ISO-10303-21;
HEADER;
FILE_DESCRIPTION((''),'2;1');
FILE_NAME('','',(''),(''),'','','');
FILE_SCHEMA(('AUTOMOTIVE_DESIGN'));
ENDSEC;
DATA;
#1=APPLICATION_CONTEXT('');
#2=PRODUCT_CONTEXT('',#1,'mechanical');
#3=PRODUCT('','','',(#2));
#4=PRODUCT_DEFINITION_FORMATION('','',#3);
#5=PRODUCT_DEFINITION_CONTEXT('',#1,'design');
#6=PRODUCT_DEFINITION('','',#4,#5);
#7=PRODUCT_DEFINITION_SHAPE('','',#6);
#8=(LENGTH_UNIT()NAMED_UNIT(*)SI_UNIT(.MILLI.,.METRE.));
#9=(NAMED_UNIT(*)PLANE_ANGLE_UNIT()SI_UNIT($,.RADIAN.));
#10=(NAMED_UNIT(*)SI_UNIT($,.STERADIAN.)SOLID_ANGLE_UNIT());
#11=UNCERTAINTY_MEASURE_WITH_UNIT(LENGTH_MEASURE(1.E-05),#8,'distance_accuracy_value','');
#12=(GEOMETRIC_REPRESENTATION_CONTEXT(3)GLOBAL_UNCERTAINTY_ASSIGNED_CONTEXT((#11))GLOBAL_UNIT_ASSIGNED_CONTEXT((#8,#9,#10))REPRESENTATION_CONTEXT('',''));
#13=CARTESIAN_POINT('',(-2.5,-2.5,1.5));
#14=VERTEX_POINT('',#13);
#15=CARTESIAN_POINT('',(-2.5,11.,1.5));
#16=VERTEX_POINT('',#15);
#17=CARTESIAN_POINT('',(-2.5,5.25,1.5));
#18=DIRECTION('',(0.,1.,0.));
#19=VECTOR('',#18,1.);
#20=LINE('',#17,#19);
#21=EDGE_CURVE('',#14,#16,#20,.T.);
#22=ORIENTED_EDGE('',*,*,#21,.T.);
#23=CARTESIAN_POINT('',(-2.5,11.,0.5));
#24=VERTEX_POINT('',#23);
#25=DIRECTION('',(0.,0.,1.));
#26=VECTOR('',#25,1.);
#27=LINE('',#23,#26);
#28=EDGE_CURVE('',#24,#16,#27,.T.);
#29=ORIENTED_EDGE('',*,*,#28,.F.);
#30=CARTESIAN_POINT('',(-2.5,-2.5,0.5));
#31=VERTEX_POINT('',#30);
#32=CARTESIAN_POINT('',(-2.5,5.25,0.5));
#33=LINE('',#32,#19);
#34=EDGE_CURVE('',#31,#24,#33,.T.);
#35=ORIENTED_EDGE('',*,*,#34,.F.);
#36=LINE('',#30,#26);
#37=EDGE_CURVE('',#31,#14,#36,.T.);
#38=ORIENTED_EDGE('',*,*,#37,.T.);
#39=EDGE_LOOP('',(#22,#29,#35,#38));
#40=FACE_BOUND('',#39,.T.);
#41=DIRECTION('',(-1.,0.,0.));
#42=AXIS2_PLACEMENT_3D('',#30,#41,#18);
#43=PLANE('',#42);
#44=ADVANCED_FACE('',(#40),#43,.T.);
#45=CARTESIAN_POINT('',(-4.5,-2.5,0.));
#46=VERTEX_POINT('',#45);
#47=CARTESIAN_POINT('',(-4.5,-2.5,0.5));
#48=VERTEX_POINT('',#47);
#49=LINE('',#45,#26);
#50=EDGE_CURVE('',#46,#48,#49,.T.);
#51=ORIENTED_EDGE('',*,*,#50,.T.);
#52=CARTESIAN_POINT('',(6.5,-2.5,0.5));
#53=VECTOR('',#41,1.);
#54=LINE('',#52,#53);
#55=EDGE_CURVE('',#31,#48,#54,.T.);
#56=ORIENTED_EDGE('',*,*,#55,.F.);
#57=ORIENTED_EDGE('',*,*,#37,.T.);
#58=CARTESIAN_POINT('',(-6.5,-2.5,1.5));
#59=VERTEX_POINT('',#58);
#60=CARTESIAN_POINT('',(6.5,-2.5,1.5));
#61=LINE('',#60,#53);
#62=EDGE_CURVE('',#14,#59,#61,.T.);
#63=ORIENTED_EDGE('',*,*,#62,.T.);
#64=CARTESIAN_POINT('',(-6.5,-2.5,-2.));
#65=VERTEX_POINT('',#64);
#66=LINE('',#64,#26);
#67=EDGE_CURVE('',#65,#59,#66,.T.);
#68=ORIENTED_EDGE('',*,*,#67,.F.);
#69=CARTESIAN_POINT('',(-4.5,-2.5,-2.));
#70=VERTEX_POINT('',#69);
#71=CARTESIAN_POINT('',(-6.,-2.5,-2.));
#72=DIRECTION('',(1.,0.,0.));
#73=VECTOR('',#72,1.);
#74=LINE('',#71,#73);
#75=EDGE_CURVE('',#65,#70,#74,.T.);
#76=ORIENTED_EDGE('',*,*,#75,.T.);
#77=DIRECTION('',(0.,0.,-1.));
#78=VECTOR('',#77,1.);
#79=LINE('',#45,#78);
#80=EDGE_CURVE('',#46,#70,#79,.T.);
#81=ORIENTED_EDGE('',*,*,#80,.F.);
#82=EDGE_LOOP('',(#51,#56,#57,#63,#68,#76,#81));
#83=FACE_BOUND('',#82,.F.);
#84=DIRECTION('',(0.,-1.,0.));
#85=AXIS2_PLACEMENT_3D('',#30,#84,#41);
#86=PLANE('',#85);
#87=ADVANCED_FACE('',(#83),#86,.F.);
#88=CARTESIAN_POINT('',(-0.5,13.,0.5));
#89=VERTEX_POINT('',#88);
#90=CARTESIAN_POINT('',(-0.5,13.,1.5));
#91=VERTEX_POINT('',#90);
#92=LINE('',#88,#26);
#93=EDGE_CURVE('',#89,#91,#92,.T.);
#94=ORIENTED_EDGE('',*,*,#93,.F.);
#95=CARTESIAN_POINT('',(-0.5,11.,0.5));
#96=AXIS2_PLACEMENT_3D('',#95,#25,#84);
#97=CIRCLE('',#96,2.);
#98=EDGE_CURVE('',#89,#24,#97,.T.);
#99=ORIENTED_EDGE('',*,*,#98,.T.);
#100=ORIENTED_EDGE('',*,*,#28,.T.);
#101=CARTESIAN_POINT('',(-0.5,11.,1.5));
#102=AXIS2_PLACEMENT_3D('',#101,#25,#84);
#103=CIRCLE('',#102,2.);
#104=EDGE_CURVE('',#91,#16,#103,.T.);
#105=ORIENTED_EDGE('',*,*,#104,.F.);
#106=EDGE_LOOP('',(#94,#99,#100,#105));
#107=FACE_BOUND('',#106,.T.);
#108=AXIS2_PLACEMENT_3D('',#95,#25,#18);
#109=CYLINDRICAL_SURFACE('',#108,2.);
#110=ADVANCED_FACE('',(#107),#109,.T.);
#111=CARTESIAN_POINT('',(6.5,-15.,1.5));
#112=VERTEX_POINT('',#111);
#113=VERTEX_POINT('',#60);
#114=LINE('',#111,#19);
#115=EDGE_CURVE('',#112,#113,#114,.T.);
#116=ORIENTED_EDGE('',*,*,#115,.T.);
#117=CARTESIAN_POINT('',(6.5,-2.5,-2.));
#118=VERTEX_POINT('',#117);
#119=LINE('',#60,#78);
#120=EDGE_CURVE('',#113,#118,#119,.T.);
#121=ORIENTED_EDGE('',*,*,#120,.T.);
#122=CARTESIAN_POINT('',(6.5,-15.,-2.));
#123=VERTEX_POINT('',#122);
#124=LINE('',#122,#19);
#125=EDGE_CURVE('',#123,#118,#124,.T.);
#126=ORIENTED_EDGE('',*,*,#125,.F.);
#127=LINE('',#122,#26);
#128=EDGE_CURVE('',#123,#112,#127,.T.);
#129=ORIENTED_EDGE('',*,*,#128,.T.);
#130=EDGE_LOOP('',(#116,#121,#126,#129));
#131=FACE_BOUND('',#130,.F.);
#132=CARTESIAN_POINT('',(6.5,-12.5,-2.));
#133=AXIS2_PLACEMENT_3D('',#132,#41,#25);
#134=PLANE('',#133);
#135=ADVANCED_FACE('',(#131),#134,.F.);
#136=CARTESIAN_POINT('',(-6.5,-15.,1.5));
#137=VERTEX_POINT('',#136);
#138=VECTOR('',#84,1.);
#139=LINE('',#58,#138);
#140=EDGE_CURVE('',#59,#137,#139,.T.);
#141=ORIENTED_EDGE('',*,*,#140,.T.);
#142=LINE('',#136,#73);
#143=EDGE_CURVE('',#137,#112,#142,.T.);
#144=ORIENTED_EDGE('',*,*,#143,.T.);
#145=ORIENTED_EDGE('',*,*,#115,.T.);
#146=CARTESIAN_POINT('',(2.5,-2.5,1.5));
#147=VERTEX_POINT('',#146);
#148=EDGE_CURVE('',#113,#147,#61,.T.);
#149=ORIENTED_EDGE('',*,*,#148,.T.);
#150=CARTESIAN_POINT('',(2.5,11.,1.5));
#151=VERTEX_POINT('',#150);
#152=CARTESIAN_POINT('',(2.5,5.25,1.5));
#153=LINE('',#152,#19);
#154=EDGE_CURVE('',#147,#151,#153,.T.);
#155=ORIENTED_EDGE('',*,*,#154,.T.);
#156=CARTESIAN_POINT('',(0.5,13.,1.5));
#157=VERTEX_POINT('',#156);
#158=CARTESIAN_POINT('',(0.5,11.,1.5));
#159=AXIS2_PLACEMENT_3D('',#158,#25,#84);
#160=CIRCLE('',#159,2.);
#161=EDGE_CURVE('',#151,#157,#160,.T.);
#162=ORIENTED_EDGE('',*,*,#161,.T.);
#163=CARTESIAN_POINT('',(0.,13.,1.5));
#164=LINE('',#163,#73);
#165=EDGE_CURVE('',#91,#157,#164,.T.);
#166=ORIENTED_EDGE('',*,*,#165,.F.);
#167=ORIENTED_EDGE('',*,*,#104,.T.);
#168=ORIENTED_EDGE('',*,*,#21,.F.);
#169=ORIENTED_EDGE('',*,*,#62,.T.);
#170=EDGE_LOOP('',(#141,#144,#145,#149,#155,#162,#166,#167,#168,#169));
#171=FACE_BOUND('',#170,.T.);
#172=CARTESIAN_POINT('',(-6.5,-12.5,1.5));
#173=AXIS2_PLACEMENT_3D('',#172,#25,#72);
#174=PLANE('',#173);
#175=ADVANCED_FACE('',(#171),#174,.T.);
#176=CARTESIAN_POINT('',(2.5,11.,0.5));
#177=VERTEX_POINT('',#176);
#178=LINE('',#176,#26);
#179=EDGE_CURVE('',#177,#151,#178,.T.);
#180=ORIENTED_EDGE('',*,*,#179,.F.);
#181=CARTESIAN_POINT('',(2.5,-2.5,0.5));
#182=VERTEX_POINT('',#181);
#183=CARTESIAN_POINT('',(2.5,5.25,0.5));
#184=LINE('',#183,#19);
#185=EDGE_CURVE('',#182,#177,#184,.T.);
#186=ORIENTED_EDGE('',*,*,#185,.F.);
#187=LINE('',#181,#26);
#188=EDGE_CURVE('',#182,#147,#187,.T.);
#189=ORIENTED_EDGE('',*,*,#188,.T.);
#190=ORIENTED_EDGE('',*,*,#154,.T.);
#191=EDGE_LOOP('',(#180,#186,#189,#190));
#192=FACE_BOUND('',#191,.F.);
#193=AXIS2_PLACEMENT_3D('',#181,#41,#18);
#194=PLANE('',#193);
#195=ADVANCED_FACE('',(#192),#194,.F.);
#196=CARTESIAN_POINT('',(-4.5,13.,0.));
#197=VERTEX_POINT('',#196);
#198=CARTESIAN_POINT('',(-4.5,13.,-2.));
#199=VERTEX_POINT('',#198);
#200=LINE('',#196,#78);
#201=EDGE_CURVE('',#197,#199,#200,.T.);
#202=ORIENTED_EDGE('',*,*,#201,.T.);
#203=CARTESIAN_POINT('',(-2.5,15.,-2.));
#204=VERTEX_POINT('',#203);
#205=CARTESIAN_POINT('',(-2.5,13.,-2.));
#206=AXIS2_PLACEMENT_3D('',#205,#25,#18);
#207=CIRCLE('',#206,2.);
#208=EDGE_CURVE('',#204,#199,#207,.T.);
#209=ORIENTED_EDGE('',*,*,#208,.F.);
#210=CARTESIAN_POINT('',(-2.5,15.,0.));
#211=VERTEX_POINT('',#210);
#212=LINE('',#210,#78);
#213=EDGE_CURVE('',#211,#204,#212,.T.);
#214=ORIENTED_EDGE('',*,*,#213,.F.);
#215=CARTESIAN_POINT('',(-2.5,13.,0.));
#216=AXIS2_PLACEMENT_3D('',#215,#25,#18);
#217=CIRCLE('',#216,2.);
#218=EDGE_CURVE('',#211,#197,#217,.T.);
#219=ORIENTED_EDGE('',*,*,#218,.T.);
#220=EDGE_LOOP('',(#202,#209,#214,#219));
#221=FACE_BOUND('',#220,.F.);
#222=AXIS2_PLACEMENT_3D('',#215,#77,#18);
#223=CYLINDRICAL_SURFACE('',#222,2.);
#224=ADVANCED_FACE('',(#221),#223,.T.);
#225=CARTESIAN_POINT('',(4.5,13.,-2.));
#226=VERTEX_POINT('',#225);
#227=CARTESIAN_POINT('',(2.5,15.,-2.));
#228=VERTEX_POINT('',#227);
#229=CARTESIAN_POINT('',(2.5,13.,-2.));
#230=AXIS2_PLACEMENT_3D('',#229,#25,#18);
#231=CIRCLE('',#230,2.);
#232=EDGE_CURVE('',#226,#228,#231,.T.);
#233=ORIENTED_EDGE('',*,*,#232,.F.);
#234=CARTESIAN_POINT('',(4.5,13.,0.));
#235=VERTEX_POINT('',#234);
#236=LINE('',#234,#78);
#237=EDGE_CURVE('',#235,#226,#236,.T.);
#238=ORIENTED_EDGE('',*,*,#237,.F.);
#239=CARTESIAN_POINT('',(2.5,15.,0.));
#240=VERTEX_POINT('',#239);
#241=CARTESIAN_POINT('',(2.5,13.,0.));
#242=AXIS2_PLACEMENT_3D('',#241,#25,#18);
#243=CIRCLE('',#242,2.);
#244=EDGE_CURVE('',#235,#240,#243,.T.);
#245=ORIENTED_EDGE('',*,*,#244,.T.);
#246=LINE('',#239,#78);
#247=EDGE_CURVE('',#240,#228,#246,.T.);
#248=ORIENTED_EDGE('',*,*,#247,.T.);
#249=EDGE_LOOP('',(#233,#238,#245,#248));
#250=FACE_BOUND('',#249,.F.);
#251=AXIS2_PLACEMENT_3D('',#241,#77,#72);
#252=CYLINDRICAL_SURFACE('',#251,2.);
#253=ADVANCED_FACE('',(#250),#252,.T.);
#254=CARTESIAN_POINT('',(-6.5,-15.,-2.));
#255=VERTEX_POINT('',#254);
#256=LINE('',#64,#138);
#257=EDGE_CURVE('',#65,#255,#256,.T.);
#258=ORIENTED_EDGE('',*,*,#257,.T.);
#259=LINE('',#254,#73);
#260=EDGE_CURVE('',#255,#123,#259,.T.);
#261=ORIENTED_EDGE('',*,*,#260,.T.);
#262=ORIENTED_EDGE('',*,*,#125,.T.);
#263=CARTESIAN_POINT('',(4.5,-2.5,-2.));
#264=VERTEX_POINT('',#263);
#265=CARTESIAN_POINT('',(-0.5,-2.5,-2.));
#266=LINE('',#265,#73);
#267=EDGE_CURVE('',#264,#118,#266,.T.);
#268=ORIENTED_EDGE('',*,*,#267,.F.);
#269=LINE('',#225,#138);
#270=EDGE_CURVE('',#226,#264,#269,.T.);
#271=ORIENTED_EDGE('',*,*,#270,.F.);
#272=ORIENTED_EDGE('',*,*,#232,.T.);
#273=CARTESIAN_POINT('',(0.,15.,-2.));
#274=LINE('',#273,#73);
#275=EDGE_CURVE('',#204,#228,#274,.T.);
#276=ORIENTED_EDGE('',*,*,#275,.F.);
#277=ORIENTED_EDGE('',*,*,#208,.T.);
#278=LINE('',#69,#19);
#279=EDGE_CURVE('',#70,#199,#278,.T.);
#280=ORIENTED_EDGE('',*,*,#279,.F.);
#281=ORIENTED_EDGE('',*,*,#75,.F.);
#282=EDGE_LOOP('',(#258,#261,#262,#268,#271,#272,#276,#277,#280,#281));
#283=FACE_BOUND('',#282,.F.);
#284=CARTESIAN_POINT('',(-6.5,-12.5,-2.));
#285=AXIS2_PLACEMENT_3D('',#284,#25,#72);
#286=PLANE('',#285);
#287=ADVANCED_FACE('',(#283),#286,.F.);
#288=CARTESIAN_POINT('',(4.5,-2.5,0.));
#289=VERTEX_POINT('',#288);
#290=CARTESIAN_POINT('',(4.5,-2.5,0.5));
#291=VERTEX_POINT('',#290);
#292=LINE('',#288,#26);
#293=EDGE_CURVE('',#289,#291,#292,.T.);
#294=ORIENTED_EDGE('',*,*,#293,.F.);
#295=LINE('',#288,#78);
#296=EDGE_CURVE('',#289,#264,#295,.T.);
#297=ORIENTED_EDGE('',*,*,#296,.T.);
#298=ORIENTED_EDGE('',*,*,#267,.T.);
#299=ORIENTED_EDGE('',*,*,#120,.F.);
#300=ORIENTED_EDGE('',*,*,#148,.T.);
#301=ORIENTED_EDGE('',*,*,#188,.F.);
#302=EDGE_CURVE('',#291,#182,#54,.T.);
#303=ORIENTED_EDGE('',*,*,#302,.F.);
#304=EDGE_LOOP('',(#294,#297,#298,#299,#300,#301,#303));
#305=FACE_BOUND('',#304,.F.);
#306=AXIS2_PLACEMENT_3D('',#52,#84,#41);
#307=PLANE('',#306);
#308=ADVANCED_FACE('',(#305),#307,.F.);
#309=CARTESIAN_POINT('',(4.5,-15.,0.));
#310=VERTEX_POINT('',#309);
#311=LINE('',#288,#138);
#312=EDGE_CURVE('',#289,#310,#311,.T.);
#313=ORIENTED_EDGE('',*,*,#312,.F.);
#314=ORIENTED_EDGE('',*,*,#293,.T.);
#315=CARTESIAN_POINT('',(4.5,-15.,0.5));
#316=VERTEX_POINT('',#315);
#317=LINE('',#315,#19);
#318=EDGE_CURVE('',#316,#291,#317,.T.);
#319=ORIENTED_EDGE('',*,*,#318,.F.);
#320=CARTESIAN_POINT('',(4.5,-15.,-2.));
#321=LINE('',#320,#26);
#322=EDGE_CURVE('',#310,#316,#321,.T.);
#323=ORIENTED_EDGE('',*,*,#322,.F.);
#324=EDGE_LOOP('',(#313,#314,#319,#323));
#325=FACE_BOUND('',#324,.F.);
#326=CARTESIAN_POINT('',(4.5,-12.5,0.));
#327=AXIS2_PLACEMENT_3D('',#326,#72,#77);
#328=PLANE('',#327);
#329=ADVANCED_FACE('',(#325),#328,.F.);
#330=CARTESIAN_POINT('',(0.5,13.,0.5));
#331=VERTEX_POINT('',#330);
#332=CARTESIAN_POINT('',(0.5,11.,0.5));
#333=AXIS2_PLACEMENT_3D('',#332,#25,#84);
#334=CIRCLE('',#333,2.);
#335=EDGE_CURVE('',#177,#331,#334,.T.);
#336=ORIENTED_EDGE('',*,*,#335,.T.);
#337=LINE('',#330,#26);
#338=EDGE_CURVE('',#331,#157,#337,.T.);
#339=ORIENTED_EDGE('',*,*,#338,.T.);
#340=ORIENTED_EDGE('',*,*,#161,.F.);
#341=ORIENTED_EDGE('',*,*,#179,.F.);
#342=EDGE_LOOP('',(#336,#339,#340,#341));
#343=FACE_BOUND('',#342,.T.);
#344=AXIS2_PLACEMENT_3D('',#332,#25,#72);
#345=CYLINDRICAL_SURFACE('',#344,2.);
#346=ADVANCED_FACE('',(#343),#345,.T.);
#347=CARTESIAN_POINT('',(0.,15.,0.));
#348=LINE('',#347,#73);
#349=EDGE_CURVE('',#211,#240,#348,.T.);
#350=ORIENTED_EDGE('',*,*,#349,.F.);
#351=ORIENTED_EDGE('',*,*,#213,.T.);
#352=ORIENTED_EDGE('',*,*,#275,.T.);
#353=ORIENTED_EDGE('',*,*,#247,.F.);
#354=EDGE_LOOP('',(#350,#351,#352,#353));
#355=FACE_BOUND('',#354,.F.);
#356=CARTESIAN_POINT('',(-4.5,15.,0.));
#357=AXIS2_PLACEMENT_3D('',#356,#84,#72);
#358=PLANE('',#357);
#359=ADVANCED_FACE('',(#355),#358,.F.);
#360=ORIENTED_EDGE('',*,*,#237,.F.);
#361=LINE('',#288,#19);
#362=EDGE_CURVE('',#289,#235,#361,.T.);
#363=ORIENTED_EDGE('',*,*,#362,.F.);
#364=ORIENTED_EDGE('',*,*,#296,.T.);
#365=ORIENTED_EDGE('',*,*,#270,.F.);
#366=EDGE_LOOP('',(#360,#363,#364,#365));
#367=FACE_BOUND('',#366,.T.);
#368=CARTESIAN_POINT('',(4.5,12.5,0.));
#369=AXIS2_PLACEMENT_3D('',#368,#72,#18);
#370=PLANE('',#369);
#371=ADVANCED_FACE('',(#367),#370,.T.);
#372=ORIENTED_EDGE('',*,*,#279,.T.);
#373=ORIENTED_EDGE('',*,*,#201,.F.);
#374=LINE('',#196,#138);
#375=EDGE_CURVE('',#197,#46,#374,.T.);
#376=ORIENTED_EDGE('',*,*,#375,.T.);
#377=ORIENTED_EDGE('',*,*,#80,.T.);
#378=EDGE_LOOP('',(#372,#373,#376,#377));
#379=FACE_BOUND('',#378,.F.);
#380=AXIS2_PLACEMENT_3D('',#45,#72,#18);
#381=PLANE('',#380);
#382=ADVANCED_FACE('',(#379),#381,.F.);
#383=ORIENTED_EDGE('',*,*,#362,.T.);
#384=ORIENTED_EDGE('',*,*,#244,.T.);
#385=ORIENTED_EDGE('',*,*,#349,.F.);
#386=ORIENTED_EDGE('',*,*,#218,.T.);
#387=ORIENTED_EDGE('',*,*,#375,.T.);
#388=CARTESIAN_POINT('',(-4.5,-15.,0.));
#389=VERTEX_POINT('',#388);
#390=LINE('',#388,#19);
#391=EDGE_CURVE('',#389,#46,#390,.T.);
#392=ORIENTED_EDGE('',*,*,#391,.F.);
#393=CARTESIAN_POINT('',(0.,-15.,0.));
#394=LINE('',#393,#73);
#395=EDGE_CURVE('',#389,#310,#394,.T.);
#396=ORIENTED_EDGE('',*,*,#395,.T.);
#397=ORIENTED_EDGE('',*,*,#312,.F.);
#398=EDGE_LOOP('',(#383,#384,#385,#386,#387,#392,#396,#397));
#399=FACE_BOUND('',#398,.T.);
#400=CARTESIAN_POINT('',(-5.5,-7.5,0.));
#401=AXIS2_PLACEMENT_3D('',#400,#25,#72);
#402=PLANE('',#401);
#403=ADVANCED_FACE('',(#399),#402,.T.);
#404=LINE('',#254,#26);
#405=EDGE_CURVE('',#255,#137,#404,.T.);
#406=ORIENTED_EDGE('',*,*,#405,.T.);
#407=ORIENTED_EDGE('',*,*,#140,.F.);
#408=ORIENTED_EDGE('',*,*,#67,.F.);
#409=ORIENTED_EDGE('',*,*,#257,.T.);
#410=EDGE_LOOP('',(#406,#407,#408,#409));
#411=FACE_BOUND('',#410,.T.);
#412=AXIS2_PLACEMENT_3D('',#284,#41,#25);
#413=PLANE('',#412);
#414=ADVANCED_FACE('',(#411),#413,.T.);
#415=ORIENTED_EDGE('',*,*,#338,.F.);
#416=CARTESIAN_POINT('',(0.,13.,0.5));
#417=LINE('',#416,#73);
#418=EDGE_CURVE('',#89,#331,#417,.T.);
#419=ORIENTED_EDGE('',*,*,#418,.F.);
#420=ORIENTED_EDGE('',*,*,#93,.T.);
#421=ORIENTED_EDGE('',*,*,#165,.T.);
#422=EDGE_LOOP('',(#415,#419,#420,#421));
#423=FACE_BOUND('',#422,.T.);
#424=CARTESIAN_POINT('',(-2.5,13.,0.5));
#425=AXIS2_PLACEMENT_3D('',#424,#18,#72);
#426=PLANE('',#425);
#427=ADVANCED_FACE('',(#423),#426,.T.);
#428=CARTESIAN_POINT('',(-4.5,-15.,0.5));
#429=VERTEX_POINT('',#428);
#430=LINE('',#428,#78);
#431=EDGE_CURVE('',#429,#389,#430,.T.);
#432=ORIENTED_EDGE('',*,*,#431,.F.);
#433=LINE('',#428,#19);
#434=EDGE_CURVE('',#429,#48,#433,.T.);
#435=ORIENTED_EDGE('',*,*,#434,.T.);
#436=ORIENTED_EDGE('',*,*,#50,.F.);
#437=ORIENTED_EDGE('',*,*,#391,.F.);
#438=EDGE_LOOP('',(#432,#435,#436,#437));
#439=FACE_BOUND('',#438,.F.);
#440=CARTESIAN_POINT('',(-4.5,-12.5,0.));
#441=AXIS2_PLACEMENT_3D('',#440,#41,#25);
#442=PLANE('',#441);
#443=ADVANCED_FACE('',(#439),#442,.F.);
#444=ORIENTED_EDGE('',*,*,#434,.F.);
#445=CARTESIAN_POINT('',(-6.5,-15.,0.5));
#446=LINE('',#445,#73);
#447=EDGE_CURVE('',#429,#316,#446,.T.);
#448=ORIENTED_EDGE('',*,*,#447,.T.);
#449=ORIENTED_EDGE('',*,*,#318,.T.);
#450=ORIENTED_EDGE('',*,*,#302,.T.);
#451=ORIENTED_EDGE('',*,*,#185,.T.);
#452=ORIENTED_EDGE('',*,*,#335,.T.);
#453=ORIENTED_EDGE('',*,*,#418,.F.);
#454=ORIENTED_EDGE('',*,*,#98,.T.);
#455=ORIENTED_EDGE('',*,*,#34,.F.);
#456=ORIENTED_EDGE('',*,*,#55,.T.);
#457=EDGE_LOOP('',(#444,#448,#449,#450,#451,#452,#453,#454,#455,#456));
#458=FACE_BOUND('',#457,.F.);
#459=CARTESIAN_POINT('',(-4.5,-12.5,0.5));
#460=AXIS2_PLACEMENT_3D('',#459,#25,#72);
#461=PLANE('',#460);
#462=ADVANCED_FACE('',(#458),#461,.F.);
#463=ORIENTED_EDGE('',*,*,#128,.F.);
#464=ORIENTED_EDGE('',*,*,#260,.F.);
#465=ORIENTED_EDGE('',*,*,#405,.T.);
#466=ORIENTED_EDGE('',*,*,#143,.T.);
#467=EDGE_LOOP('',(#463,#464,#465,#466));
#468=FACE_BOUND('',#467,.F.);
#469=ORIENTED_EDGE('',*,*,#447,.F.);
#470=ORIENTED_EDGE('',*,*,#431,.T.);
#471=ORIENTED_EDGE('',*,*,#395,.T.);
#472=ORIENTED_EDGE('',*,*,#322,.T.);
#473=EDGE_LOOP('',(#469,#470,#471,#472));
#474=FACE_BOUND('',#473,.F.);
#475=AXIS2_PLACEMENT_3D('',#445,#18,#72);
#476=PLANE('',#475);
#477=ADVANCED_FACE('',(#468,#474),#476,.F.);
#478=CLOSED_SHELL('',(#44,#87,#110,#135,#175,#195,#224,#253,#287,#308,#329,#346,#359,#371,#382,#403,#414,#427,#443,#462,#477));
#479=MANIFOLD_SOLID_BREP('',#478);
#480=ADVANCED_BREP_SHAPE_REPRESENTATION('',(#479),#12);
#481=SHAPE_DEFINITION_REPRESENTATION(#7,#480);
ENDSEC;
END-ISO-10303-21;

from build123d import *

# Parameters (mm, degrees)
F0_W     = 2
F0_H     = 10
F0_W_2   = 9
F0_H_2   = 2.5
F0_H_3   = 15
F1_DEPTH = 2
F2_DEPTH = 0.5
F3_W     = 2
F3_H     = 10
F3_W_2   = 5
F3_H_2   = 15.5
F4_DEPTH = 1
F5_R     = 2
F6_DEPTH = 25
F7_DEPTH = 2.5


# Not quite as in the source:
# - a feature names something its author has since deleted; it is built from what else it names


with BuildPart() as f1:
    # F0 (on Top) → F1 (new body)
    with BuildSketch(Plane.XY):
        with Locations((-5.5, -7.5)):
            Rectangle(F0_W, F0_H)
        with Locations((0, 13.75)):
            Rectangle(F0_W_2, F0_H_2)
        Polygon((4.5, -2.5), (4.5, 12.5), (-4.5, 12.5), (-4.5, -2.5), (-4.5, -12.5), (4.5, -12.5), align=None)
        with Locations((0, -13.75)):
            Rectangle(F0_W_2, F0_H_2)
        with Locations((5.5, -7.5)):
            Rectangle(F0_W, F0_H)
        with Locations((-5.5, 5)):
            Rectangle(F0_W, F0_H_3)
        with Locations((5.5, 5)):
            Rectangle(F0_W, F0_H_3)
    extrude(amount=-F1_DEPTH)

    # F0 (on Top) → F2 (join)
    with BuildSketch(Plane.XY):
        with Locations((-5.5, -7.5)):
            Rectangle(F0_W, F0_H)
        with Locations((5.5, -7.5)):
            Rectangle(F0_W, F0_H)
    extrude(amount=F2_DEPTH)

    # F3 (on face) → F4 (join)
    with BuildSketch(Plane.XY.offset(0.5)):
        with Locations((-5.5, -7.5)):
            Rectangle(F3_W, F3_H)
        Polygon((-4.5, -2.5), (-4.5, -12.5), (6.5, -12.5), (6.5, -2.5), (4.5, -2.5), (2.5, -2.5), (-2.5, -2.5), align=None)
        with Locations((0, 5.25)):
            Rectangle(F3_W_2, F3_H_2)
    extrude(amount=F4_DEPTH)

    # F5
    f5_edges = [f1.edges().sort_by_distance(p)[0] for p in [
        (-4.5, 15, -1),
        (4.5, 15, -1),
        (-2.5, 13, 1),
        (2.5, 13, 1),
    ]]
    fillet(f5_edges, radius=F5_R)

    # F0 (on Top) → F6 (cut)
    with BuildSketch(Plane.XY):
        with Locations((-5.5, 5)):
            Rectangle(F0_W, F0_H_3)
        with Locations((5.5, 5)):
            Rectangle(F0_W, F0_H_3)
    extrude(amount=-F6_DEPTH, mode=Mode.SUBTRACT)

    # F7 (add, through all): a face of the model
    f7_faces = [f1.faces().sort_by_distance(p)[0] for p in [
        (-5.5, -12.5, -1.8653708798),
    ]]
    extrude(f7_faces, amount=F7_DEPTH)


solid = f1.part
